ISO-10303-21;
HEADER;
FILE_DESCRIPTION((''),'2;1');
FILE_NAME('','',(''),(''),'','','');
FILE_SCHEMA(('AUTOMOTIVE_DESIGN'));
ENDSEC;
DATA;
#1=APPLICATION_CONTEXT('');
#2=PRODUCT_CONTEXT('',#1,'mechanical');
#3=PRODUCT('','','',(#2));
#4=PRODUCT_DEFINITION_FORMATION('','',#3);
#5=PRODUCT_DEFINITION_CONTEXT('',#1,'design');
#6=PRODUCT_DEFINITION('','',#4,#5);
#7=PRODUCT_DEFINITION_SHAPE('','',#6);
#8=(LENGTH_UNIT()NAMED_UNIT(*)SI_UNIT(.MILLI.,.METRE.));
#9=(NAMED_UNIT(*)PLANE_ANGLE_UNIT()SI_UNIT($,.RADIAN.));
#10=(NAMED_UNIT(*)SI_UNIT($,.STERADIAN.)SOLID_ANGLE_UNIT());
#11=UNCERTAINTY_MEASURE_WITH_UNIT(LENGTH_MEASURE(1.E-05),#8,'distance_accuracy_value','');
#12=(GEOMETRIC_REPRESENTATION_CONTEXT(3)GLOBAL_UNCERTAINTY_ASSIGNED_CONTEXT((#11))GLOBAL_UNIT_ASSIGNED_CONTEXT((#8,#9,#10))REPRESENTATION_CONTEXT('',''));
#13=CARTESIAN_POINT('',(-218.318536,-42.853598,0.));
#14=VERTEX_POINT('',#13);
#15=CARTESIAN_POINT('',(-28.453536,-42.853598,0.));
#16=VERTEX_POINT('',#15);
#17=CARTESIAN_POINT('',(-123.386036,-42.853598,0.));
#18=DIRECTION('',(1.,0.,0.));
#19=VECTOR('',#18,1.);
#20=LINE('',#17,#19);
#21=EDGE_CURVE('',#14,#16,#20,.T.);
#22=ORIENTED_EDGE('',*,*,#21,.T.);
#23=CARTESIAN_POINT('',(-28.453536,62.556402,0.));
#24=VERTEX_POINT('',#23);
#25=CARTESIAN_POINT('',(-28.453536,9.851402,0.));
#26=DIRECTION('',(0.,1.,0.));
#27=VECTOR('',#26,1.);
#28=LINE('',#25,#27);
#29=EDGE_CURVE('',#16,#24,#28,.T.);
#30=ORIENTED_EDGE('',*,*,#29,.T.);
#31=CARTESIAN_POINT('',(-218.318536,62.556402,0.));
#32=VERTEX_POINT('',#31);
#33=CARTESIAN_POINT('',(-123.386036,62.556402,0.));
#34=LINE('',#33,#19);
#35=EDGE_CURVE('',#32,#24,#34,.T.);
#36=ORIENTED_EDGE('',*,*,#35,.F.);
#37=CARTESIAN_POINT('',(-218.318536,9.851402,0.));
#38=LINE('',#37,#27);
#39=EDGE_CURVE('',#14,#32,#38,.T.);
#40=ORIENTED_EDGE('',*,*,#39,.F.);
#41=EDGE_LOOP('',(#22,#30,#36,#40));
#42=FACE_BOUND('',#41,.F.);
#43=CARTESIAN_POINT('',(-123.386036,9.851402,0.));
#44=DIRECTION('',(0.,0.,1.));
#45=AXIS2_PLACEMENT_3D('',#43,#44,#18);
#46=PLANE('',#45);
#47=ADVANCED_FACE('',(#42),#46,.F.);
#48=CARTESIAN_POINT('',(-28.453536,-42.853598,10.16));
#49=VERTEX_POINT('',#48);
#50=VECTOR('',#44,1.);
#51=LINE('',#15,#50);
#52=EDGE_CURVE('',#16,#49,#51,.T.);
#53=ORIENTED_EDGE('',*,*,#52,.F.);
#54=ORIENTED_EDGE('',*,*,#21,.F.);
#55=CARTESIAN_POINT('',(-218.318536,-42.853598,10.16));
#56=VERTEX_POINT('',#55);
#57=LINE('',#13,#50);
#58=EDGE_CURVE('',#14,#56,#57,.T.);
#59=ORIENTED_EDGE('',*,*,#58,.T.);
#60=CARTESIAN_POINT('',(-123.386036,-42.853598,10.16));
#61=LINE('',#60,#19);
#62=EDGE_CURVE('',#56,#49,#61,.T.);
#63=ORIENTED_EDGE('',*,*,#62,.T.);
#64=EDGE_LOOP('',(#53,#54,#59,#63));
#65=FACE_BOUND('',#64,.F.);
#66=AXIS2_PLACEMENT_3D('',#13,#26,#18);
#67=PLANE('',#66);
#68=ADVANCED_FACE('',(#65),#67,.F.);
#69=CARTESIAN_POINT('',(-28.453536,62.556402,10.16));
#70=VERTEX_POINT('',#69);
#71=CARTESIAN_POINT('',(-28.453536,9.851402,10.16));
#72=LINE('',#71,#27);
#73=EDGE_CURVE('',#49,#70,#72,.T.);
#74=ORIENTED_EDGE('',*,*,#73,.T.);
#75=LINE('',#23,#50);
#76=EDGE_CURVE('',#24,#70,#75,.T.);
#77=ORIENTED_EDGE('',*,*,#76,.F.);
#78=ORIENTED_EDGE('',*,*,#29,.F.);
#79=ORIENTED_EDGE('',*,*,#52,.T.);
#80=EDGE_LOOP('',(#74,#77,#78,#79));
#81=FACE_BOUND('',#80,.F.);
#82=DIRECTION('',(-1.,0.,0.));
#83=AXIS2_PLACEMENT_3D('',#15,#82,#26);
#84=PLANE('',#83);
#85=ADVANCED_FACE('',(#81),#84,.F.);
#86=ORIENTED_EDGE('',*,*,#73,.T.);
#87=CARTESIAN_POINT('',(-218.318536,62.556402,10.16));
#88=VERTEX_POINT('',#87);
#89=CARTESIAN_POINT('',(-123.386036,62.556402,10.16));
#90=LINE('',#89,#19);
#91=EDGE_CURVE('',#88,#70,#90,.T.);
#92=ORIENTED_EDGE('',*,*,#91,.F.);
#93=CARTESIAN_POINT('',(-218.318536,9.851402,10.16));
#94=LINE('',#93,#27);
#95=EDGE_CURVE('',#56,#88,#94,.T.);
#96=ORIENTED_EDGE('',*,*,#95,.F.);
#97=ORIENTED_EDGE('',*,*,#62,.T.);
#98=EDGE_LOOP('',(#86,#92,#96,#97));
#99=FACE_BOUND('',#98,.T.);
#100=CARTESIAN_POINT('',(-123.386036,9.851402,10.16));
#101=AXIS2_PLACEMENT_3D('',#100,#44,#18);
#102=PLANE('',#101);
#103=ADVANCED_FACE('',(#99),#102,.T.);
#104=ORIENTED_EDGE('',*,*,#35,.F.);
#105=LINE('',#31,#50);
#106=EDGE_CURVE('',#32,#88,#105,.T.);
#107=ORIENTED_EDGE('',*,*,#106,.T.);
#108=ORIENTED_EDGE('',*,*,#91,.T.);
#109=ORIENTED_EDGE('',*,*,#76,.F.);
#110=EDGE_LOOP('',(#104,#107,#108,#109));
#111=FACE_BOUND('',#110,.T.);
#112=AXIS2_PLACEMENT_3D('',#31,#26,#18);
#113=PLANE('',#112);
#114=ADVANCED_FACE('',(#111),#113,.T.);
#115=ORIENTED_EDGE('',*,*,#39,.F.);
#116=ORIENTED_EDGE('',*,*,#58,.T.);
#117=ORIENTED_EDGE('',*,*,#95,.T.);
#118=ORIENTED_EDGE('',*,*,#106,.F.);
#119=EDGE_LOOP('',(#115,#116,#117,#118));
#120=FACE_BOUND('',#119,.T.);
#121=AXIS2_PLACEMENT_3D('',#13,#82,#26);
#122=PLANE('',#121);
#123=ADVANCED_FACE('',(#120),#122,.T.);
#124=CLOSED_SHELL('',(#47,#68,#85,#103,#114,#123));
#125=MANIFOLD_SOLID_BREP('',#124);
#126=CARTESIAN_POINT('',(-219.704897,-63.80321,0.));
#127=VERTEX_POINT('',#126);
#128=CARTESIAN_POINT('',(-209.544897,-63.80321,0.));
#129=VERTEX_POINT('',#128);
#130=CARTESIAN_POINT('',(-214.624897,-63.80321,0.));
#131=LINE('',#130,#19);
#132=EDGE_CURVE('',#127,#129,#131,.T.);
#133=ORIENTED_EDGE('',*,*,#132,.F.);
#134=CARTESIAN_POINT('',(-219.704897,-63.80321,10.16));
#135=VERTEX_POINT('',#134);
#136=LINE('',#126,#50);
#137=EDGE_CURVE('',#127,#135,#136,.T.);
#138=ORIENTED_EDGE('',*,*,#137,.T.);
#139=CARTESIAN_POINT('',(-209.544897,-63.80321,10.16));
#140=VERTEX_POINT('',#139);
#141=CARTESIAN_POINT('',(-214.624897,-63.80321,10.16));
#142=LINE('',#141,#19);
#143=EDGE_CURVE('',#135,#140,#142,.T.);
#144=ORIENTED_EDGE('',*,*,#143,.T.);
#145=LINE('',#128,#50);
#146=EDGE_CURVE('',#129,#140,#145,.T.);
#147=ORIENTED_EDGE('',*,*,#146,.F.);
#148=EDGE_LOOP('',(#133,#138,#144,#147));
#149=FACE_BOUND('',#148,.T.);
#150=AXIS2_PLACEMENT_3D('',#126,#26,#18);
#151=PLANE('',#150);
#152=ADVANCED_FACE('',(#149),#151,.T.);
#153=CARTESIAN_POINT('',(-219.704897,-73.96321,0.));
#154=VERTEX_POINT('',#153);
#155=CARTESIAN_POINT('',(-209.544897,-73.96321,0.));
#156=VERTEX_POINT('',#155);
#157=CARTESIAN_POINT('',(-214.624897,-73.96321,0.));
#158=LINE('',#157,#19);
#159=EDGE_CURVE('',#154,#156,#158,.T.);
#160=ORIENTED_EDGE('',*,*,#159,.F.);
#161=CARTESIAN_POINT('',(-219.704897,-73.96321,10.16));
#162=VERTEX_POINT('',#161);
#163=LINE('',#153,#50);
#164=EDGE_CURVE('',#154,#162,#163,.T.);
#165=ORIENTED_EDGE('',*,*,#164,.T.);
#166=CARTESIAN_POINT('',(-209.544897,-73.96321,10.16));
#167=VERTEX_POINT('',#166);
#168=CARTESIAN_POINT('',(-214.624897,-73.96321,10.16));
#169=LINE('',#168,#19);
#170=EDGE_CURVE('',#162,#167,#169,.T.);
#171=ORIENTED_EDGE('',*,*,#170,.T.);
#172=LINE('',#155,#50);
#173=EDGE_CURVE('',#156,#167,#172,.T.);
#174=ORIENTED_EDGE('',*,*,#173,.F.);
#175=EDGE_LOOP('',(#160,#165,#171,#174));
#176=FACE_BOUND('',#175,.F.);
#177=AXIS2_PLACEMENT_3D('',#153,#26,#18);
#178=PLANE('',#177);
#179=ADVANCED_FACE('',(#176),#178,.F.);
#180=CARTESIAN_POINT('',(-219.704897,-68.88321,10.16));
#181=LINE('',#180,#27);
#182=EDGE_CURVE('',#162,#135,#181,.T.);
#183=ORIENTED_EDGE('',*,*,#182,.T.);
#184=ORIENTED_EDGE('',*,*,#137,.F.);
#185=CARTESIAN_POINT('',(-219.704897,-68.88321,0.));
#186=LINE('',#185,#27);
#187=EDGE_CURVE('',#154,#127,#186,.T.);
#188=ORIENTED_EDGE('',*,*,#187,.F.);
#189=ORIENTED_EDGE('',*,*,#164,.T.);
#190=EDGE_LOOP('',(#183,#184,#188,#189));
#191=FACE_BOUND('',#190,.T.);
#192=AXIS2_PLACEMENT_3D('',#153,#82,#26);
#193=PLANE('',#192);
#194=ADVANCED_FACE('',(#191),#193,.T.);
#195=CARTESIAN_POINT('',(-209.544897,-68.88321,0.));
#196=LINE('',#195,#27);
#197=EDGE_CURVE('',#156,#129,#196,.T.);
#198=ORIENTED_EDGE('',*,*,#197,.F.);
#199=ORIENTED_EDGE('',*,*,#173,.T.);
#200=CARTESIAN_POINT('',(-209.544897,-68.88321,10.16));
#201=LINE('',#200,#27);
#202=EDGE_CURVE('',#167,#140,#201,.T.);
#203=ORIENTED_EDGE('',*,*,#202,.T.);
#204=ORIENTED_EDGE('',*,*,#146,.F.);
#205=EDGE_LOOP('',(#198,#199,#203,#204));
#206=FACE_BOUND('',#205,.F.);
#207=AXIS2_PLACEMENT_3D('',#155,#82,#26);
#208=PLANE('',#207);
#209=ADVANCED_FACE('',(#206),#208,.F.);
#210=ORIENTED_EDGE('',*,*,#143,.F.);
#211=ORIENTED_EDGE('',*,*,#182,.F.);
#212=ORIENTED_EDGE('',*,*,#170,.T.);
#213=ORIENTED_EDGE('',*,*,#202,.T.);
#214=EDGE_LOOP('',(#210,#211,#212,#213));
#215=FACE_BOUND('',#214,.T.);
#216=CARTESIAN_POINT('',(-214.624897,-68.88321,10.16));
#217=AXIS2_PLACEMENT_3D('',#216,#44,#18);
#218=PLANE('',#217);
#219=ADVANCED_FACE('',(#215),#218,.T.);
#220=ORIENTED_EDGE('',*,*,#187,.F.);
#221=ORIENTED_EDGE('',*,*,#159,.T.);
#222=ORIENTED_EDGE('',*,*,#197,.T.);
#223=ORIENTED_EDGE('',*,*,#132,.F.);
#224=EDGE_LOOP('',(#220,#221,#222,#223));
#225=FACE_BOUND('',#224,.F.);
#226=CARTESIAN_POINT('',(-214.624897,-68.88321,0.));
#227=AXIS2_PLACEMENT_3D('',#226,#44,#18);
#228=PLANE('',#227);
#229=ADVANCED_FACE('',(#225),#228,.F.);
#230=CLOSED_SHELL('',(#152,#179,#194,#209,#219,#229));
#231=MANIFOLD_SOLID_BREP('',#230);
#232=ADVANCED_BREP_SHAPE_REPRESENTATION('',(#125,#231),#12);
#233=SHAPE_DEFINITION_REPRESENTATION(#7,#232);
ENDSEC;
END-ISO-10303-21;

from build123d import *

# Parameters (mm, degrees)
F0_W     = 189.865
F0_H     = 105.41
F1_DEPTH = 10.16
F0_W_2   = 10.16
F0_H_2   = 10.16


# Not quite as in the source:
# - the program builds the solid bodies; features that only make, move or delete a surface that nothing else refers to are left out


with BuildPart() as f1:
    # F0 (on Top) → F1 (new body)
    with BuildSketch(Plane.XY):
        with Locations((-123.3860363317, 9.8514024484)):
            Rectangle(F0_W, F0_H)
    extrude(amount=F1_DEPTH)


with BuildPart() as f1b:
    # F0 (on Top) → F1, piece 2 (new body)
    with BuildSketch(Plane.XY):
        with Locations((-214.6248970795, -68.8832099867)):
            Rectangle(F0_W_2, F0_H_2)
    extrude(amount=F1_DEPTH)


solid = Compound([f1.part, f1b.part])
